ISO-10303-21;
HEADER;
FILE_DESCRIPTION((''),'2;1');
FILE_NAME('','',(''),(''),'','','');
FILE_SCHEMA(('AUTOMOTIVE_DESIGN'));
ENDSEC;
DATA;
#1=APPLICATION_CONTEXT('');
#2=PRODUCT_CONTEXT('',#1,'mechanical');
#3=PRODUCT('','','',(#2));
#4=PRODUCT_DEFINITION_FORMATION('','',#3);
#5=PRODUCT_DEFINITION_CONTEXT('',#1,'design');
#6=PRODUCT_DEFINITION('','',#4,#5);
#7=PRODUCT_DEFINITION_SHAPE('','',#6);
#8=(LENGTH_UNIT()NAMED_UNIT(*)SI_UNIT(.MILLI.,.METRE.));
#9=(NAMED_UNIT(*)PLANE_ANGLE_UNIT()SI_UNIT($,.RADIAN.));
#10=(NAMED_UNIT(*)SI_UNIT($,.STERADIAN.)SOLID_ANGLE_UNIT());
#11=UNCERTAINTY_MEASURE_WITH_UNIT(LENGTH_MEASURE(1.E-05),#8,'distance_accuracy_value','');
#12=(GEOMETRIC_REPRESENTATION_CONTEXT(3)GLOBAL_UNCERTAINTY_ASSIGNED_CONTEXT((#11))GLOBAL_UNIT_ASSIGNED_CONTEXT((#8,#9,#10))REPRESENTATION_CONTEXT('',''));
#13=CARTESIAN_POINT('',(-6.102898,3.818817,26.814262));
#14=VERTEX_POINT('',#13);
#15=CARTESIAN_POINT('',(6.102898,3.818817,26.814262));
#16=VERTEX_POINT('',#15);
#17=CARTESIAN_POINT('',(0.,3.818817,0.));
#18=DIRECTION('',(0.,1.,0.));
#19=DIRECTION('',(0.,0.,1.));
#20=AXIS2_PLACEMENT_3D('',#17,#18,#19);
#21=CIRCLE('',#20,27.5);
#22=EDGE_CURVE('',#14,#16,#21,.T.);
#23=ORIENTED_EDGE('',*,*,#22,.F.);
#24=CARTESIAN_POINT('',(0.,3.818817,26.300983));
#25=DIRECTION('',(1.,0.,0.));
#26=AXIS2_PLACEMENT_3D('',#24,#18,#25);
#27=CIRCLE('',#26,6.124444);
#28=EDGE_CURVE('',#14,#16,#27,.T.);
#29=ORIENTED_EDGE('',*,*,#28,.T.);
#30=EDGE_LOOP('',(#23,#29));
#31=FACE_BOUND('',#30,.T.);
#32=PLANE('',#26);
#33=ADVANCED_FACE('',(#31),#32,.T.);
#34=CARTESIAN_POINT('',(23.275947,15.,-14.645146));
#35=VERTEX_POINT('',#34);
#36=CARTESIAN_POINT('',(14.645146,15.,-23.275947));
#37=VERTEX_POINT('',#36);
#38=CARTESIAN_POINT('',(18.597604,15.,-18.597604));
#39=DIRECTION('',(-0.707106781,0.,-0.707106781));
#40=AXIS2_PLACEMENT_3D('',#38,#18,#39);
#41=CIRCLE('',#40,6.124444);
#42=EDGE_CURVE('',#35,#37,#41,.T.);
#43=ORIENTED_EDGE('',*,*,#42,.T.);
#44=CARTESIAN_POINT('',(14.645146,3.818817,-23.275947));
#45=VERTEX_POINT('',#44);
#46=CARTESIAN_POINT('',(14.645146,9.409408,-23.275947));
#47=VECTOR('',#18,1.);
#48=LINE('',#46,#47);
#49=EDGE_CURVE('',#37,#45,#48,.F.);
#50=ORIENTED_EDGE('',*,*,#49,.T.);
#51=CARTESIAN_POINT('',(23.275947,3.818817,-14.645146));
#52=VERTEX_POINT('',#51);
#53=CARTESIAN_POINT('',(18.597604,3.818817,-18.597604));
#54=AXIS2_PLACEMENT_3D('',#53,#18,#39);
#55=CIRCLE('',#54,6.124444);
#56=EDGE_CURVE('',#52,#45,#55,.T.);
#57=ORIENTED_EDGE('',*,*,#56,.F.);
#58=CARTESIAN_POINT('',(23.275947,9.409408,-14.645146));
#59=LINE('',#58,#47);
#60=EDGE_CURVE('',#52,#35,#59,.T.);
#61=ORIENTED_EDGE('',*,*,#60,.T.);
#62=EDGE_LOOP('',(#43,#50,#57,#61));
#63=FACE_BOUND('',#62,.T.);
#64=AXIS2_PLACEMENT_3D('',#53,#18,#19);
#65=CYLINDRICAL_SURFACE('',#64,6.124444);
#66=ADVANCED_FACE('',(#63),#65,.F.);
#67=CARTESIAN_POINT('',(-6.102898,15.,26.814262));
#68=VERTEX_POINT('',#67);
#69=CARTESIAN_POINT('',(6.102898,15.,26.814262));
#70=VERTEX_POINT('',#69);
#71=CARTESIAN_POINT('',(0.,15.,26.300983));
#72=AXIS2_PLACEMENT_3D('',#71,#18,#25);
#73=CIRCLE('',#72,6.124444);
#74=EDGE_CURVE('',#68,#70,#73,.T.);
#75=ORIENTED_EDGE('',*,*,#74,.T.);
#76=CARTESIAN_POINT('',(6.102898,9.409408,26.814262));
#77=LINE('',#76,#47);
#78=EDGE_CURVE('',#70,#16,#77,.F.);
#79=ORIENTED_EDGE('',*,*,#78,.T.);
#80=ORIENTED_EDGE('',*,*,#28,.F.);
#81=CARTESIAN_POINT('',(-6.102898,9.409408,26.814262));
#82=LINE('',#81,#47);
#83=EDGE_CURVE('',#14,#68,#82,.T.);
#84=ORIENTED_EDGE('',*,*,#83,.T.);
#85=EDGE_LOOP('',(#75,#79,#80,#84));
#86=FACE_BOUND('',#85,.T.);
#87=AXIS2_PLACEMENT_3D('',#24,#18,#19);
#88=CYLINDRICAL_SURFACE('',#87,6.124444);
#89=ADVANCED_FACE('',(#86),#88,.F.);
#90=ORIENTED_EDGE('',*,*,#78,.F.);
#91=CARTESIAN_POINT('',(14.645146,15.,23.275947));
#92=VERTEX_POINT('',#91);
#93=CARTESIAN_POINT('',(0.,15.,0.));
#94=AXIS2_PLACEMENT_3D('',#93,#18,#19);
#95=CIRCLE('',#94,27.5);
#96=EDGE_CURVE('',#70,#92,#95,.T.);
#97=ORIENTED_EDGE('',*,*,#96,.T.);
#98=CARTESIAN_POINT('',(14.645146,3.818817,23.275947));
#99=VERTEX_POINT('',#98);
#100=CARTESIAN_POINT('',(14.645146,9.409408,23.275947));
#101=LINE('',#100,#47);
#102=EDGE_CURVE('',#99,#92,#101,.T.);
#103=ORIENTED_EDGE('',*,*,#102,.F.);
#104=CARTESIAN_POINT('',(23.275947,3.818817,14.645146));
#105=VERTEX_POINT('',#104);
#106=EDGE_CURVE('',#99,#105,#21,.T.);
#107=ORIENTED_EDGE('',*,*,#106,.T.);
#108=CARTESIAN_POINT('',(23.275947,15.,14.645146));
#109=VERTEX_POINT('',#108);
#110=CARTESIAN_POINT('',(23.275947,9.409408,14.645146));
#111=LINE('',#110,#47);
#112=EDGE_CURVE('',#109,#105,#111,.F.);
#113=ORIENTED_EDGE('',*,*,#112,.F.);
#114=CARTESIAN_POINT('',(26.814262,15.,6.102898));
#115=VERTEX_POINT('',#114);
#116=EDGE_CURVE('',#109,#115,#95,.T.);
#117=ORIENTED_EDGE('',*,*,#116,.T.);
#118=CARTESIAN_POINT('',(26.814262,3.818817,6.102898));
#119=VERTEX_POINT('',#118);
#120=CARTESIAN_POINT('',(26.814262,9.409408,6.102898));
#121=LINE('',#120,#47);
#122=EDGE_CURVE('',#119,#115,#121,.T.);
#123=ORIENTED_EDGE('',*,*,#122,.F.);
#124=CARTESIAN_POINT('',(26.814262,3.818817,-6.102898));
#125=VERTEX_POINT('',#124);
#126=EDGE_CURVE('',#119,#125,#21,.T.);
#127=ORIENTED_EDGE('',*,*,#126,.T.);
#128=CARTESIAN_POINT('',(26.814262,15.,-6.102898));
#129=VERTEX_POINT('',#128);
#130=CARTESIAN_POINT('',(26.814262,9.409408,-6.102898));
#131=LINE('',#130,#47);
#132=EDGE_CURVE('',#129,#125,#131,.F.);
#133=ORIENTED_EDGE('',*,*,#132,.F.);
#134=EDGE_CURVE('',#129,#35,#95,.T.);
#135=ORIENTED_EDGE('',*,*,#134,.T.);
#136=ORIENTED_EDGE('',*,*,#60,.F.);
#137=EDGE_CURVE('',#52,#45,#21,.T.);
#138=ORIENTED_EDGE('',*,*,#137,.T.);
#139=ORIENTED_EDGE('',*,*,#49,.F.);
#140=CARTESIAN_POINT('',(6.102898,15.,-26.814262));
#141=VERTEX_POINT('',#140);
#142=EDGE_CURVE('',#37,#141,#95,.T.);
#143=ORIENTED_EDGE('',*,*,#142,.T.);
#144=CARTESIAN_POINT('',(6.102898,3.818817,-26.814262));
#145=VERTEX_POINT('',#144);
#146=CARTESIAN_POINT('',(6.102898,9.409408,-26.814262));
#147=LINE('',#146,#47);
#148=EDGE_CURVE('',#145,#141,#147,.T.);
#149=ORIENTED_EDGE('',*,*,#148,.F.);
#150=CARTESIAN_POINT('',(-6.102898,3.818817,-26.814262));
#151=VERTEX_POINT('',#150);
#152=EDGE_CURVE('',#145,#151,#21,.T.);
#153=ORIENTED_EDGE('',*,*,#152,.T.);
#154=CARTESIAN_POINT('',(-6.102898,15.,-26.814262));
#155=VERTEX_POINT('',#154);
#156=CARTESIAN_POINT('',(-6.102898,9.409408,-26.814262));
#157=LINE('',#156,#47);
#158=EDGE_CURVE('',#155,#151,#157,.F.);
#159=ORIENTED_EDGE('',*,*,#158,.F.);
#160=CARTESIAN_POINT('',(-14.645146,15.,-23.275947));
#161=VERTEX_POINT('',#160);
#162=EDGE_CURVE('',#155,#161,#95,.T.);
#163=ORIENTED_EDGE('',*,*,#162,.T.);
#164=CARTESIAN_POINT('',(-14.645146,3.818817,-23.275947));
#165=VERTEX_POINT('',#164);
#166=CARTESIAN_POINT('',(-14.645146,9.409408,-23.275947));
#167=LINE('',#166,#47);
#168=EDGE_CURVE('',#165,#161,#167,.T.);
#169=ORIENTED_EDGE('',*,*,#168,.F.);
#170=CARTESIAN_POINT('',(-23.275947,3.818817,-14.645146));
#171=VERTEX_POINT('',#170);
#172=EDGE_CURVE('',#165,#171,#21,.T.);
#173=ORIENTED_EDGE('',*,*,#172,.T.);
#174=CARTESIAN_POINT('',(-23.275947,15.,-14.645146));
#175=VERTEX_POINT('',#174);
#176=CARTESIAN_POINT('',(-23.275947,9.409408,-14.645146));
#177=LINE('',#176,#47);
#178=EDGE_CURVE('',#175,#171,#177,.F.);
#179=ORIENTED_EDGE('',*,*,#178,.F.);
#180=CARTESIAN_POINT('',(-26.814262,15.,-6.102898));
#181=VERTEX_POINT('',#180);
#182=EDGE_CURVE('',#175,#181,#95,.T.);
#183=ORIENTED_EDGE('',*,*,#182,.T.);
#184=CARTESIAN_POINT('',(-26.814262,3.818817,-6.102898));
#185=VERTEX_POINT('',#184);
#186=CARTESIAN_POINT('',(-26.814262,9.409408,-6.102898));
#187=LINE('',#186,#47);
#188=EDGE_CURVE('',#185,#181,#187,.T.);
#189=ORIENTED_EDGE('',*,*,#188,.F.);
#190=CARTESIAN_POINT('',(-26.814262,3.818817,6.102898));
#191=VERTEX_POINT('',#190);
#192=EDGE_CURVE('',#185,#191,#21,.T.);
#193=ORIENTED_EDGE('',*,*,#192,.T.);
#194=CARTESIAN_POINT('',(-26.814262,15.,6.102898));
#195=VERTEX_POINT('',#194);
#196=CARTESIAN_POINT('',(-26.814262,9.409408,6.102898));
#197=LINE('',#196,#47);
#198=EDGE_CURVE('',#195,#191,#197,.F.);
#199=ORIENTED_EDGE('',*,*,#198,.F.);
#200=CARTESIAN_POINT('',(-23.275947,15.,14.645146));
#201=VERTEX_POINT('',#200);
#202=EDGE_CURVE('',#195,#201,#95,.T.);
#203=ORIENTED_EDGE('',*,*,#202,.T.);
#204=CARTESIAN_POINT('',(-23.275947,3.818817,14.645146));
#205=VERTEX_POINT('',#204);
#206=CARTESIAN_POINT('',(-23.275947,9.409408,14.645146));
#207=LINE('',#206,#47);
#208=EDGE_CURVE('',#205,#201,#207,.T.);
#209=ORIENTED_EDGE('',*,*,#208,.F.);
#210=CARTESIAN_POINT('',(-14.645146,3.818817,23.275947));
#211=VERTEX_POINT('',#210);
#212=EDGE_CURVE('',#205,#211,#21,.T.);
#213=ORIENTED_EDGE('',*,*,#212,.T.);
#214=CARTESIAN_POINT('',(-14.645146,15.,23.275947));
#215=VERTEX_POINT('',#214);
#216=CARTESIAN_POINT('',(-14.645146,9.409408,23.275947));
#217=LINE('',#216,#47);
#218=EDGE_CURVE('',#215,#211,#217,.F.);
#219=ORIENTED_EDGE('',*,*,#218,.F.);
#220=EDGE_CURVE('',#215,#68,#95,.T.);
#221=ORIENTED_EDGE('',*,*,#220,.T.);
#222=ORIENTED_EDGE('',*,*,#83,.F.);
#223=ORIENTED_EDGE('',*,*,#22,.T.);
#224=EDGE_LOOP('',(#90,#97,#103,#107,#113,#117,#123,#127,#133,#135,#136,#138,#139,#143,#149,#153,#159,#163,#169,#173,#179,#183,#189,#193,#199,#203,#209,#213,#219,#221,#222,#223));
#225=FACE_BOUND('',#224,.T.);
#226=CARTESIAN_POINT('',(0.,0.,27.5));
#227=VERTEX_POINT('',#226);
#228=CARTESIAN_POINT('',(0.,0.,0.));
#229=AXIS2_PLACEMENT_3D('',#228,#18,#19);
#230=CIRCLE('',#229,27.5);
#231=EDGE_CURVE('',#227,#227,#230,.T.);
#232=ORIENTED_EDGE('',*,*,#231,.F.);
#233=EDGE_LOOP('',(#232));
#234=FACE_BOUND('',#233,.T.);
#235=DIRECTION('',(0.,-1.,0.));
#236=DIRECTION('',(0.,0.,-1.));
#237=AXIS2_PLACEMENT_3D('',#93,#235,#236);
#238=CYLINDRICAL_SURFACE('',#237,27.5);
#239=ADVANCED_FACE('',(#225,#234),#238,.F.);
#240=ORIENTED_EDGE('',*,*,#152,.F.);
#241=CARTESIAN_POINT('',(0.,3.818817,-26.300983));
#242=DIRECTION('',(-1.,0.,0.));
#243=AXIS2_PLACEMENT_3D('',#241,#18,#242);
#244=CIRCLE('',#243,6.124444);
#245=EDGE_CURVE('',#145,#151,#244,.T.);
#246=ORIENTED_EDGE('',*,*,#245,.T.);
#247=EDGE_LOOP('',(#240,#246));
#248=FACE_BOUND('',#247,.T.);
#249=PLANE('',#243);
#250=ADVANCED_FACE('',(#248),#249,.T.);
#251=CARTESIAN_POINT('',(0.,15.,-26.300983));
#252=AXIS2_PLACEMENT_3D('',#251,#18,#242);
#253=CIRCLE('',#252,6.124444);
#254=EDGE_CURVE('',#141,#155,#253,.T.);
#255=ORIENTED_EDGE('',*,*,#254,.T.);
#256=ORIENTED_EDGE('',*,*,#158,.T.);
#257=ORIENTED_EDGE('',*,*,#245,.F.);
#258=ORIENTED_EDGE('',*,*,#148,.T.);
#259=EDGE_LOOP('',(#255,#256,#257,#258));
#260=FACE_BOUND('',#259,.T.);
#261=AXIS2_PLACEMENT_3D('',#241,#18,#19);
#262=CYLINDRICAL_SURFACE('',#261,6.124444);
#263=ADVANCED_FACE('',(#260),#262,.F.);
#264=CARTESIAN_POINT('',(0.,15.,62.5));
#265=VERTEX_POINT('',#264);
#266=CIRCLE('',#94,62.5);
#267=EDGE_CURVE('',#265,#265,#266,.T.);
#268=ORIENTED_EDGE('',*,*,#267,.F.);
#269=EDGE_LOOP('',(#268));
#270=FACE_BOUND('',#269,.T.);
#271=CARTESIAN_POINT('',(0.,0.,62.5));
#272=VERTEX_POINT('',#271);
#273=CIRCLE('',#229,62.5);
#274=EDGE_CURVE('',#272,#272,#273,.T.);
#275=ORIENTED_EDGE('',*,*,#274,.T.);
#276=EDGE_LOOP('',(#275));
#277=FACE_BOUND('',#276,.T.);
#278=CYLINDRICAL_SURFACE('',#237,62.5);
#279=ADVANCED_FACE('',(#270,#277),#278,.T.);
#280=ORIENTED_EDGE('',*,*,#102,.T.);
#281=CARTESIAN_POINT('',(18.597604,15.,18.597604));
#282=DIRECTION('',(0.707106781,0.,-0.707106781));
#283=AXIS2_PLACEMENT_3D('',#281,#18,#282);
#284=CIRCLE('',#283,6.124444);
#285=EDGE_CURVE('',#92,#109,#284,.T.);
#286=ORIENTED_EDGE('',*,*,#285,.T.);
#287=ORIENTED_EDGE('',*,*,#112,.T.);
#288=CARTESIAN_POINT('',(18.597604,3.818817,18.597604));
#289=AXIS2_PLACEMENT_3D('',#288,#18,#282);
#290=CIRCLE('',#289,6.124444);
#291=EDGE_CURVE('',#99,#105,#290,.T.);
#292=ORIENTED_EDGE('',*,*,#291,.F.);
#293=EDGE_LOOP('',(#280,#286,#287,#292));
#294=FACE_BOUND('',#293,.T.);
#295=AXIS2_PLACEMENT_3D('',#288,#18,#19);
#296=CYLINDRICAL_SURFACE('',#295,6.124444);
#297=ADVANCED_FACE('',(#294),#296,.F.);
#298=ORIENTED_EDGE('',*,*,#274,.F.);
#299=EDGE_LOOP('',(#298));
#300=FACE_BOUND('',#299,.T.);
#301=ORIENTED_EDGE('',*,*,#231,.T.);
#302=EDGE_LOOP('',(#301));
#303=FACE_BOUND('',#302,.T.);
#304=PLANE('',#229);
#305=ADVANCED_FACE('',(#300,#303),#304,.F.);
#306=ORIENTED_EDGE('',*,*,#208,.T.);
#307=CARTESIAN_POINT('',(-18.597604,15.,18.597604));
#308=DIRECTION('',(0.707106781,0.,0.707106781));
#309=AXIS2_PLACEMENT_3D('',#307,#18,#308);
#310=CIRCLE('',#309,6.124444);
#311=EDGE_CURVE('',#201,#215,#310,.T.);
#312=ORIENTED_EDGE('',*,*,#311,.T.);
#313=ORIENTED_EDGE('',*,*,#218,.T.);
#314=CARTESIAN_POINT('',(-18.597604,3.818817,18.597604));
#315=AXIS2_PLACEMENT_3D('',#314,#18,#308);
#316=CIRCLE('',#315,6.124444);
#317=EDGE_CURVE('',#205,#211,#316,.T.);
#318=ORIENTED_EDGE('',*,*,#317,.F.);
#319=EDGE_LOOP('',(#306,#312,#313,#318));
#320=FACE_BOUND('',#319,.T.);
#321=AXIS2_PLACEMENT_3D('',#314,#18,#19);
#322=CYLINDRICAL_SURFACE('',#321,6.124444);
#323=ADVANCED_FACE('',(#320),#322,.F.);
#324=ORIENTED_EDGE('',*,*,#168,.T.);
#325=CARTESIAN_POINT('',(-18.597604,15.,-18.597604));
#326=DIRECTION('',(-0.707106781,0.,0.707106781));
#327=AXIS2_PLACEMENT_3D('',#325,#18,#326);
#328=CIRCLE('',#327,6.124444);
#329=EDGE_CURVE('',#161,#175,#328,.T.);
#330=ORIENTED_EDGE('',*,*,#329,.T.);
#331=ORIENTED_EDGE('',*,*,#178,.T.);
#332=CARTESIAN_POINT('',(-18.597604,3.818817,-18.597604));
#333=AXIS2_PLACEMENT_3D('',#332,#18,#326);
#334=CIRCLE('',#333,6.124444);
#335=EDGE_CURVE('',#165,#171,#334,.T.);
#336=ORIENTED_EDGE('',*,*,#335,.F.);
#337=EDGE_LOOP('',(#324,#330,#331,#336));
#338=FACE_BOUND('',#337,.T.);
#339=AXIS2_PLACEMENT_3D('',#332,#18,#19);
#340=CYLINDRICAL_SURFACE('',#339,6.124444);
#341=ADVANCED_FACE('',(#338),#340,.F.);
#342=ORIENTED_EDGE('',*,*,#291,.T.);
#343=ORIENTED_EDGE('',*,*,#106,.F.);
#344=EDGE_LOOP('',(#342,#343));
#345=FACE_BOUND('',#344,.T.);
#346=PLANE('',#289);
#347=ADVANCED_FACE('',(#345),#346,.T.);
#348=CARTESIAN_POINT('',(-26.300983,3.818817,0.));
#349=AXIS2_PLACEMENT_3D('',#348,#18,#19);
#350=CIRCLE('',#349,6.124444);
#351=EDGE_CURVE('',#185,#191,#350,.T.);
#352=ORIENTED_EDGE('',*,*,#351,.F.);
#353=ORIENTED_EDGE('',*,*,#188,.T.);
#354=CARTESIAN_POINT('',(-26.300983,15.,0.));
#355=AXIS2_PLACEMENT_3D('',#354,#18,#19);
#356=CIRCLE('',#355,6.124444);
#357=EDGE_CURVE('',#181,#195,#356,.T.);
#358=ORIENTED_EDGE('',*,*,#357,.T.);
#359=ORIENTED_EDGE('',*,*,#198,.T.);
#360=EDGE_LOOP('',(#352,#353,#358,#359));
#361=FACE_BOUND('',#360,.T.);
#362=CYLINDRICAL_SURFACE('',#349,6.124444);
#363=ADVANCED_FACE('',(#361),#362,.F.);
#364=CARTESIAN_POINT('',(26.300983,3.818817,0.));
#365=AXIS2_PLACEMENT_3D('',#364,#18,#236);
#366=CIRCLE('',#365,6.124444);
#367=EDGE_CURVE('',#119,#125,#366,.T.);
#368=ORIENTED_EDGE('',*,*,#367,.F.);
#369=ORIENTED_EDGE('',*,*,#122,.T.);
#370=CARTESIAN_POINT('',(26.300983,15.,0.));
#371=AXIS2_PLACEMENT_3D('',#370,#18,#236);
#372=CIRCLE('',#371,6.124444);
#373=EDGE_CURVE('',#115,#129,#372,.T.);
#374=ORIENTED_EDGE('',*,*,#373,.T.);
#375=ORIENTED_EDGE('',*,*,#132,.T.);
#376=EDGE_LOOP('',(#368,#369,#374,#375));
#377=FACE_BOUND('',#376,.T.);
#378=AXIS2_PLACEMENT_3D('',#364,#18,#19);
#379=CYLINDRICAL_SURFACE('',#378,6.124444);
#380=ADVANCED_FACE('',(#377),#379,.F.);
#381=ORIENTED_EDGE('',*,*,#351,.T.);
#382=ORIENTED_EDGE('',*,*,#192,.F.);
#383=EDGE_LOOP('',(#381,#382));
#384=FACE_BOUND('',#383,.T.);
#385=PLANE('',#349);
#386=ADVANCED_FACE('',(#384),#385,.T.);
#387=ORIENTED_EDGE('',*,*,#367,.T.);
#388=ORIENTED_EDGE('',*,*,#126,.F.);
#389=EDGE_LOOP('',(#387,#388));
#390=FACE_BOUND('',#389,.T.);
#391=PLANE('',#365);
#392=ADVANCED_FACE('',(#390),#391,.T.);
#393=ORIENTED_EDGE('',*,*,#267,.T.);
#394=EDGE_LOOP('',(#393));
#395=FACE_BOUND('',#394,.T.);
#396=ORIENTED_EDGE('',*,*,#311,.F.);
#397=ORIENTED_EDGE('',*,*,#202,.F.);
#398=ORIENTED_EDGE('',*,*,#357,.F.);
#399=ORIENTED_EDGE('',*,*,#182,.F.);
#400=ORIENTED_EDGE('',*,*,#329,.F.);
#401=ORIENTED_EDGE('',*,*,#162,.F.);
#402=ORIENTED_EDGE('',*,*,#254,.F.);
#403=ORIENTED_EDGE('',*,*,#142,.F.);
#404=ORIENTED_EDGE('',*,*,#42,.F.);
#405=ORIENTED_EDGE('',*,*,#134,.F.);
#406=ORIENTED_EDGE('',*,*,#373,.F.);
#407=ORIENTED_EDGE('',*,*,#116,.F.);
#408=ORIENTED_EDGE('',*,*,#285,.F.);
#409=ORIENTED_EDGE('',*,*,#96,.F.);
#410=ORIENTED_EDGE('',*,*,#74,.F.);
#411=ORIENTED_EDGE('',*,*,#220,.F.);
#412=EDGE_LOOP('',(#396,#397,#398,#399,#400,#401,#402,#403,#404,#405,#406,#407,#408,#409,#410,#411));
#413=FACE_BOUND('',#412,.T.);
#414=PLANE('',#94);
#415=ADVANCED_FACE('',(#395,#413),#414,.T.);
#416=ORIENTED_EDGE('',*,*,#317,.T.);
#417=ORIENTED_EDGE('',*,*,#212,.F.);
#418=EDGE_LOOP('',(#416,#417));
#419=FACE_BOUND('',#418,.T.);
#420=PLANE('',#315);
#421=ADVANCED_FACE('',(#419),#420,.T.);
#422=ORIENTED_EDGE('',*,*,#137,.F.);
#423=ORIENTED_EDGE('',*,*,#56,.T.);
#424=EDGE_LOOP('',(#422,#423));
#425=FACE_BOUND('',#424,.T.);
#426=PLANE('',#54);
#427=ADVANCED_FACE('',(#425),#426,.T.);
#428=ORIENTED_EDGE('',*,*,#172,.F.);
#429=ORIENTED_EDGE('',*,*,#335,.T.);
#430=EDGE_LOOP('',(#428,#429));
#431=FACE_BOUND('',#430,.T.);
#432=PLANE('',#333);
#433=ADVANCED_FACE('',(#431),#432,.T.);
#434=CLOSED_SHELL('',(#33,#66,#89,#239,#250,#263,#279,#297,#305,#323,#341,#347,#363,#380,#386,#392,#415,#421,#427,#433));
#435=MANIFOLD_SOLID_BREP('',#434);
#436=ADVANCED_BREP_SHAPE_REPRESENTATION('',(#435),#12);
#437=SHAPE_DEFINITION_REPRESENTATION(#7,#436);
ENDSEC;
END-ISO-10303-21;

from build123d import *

# Parameters (mm, degrees)
SKETCH1_R           = 62.5
BOSS_EXTRUDE1_DEPTH = 15
SKETCH2_R           = 27.5
CUT_EXTRUDE1_DEPTH  = 90.652105385
SKETCH3_R           = 6.124444425
CUT_EXTRUDE2_DEPTH  = 11.181183186
CIRPATTERN1_COUNT   = 8


with BuildPart() as part:
    # Sketch1 → Boss-Extrude1 (new body)
    with BuildSketch(Plane(origin=(0, 0, 0), x_dir=(1, 0, 0), z_dir=(0, 1, 0))):
        Circle(SKETCH1_R)
    extrude(amount=BOSS_EXTRUDE1_DEPTH)

    # Sketch2 → Cut-Extrude1 (cut, through all)
    with BuildSketch(Plane(origin=(0, 0, 0), x_dir=(1, 0, 0), z_dir=(0, 1, 0))):
        Circle(SKETCH2_R)
    extrude(amount=CUT_EXTRUDE1_DEPTH, mode=Mode.SUBTRACT)

    # Sketch3 → Cut-Extrude2 (cut)
    with BuildSketch(Plane(origin=(0, 15, 0), x_dir=(1, 0, 0), z_dir=(0, 1, 0))):
        with Locations((-26.30098341, 0)):
            Circle(SKETCH3_R)
    cut_extrude2 = extrude(amount=-CUT_EXTRUDE2_DEPTH, mode=Mode.SUBTRACT)

    # CirPattern1: Cut-Extrude2 ×8 about axis
    cirpattern1_axis = Axis((0, 0, 0), (0, 1, 0))
    for i in range(1, CIRPATTERN1_COUNT):
        add(cut_extrude2.rotate(cirpattern1_axis, i * 360 / CIRPATTERN1_COUNT), mode=Mode.SUBTRACT)


solid = part.part
